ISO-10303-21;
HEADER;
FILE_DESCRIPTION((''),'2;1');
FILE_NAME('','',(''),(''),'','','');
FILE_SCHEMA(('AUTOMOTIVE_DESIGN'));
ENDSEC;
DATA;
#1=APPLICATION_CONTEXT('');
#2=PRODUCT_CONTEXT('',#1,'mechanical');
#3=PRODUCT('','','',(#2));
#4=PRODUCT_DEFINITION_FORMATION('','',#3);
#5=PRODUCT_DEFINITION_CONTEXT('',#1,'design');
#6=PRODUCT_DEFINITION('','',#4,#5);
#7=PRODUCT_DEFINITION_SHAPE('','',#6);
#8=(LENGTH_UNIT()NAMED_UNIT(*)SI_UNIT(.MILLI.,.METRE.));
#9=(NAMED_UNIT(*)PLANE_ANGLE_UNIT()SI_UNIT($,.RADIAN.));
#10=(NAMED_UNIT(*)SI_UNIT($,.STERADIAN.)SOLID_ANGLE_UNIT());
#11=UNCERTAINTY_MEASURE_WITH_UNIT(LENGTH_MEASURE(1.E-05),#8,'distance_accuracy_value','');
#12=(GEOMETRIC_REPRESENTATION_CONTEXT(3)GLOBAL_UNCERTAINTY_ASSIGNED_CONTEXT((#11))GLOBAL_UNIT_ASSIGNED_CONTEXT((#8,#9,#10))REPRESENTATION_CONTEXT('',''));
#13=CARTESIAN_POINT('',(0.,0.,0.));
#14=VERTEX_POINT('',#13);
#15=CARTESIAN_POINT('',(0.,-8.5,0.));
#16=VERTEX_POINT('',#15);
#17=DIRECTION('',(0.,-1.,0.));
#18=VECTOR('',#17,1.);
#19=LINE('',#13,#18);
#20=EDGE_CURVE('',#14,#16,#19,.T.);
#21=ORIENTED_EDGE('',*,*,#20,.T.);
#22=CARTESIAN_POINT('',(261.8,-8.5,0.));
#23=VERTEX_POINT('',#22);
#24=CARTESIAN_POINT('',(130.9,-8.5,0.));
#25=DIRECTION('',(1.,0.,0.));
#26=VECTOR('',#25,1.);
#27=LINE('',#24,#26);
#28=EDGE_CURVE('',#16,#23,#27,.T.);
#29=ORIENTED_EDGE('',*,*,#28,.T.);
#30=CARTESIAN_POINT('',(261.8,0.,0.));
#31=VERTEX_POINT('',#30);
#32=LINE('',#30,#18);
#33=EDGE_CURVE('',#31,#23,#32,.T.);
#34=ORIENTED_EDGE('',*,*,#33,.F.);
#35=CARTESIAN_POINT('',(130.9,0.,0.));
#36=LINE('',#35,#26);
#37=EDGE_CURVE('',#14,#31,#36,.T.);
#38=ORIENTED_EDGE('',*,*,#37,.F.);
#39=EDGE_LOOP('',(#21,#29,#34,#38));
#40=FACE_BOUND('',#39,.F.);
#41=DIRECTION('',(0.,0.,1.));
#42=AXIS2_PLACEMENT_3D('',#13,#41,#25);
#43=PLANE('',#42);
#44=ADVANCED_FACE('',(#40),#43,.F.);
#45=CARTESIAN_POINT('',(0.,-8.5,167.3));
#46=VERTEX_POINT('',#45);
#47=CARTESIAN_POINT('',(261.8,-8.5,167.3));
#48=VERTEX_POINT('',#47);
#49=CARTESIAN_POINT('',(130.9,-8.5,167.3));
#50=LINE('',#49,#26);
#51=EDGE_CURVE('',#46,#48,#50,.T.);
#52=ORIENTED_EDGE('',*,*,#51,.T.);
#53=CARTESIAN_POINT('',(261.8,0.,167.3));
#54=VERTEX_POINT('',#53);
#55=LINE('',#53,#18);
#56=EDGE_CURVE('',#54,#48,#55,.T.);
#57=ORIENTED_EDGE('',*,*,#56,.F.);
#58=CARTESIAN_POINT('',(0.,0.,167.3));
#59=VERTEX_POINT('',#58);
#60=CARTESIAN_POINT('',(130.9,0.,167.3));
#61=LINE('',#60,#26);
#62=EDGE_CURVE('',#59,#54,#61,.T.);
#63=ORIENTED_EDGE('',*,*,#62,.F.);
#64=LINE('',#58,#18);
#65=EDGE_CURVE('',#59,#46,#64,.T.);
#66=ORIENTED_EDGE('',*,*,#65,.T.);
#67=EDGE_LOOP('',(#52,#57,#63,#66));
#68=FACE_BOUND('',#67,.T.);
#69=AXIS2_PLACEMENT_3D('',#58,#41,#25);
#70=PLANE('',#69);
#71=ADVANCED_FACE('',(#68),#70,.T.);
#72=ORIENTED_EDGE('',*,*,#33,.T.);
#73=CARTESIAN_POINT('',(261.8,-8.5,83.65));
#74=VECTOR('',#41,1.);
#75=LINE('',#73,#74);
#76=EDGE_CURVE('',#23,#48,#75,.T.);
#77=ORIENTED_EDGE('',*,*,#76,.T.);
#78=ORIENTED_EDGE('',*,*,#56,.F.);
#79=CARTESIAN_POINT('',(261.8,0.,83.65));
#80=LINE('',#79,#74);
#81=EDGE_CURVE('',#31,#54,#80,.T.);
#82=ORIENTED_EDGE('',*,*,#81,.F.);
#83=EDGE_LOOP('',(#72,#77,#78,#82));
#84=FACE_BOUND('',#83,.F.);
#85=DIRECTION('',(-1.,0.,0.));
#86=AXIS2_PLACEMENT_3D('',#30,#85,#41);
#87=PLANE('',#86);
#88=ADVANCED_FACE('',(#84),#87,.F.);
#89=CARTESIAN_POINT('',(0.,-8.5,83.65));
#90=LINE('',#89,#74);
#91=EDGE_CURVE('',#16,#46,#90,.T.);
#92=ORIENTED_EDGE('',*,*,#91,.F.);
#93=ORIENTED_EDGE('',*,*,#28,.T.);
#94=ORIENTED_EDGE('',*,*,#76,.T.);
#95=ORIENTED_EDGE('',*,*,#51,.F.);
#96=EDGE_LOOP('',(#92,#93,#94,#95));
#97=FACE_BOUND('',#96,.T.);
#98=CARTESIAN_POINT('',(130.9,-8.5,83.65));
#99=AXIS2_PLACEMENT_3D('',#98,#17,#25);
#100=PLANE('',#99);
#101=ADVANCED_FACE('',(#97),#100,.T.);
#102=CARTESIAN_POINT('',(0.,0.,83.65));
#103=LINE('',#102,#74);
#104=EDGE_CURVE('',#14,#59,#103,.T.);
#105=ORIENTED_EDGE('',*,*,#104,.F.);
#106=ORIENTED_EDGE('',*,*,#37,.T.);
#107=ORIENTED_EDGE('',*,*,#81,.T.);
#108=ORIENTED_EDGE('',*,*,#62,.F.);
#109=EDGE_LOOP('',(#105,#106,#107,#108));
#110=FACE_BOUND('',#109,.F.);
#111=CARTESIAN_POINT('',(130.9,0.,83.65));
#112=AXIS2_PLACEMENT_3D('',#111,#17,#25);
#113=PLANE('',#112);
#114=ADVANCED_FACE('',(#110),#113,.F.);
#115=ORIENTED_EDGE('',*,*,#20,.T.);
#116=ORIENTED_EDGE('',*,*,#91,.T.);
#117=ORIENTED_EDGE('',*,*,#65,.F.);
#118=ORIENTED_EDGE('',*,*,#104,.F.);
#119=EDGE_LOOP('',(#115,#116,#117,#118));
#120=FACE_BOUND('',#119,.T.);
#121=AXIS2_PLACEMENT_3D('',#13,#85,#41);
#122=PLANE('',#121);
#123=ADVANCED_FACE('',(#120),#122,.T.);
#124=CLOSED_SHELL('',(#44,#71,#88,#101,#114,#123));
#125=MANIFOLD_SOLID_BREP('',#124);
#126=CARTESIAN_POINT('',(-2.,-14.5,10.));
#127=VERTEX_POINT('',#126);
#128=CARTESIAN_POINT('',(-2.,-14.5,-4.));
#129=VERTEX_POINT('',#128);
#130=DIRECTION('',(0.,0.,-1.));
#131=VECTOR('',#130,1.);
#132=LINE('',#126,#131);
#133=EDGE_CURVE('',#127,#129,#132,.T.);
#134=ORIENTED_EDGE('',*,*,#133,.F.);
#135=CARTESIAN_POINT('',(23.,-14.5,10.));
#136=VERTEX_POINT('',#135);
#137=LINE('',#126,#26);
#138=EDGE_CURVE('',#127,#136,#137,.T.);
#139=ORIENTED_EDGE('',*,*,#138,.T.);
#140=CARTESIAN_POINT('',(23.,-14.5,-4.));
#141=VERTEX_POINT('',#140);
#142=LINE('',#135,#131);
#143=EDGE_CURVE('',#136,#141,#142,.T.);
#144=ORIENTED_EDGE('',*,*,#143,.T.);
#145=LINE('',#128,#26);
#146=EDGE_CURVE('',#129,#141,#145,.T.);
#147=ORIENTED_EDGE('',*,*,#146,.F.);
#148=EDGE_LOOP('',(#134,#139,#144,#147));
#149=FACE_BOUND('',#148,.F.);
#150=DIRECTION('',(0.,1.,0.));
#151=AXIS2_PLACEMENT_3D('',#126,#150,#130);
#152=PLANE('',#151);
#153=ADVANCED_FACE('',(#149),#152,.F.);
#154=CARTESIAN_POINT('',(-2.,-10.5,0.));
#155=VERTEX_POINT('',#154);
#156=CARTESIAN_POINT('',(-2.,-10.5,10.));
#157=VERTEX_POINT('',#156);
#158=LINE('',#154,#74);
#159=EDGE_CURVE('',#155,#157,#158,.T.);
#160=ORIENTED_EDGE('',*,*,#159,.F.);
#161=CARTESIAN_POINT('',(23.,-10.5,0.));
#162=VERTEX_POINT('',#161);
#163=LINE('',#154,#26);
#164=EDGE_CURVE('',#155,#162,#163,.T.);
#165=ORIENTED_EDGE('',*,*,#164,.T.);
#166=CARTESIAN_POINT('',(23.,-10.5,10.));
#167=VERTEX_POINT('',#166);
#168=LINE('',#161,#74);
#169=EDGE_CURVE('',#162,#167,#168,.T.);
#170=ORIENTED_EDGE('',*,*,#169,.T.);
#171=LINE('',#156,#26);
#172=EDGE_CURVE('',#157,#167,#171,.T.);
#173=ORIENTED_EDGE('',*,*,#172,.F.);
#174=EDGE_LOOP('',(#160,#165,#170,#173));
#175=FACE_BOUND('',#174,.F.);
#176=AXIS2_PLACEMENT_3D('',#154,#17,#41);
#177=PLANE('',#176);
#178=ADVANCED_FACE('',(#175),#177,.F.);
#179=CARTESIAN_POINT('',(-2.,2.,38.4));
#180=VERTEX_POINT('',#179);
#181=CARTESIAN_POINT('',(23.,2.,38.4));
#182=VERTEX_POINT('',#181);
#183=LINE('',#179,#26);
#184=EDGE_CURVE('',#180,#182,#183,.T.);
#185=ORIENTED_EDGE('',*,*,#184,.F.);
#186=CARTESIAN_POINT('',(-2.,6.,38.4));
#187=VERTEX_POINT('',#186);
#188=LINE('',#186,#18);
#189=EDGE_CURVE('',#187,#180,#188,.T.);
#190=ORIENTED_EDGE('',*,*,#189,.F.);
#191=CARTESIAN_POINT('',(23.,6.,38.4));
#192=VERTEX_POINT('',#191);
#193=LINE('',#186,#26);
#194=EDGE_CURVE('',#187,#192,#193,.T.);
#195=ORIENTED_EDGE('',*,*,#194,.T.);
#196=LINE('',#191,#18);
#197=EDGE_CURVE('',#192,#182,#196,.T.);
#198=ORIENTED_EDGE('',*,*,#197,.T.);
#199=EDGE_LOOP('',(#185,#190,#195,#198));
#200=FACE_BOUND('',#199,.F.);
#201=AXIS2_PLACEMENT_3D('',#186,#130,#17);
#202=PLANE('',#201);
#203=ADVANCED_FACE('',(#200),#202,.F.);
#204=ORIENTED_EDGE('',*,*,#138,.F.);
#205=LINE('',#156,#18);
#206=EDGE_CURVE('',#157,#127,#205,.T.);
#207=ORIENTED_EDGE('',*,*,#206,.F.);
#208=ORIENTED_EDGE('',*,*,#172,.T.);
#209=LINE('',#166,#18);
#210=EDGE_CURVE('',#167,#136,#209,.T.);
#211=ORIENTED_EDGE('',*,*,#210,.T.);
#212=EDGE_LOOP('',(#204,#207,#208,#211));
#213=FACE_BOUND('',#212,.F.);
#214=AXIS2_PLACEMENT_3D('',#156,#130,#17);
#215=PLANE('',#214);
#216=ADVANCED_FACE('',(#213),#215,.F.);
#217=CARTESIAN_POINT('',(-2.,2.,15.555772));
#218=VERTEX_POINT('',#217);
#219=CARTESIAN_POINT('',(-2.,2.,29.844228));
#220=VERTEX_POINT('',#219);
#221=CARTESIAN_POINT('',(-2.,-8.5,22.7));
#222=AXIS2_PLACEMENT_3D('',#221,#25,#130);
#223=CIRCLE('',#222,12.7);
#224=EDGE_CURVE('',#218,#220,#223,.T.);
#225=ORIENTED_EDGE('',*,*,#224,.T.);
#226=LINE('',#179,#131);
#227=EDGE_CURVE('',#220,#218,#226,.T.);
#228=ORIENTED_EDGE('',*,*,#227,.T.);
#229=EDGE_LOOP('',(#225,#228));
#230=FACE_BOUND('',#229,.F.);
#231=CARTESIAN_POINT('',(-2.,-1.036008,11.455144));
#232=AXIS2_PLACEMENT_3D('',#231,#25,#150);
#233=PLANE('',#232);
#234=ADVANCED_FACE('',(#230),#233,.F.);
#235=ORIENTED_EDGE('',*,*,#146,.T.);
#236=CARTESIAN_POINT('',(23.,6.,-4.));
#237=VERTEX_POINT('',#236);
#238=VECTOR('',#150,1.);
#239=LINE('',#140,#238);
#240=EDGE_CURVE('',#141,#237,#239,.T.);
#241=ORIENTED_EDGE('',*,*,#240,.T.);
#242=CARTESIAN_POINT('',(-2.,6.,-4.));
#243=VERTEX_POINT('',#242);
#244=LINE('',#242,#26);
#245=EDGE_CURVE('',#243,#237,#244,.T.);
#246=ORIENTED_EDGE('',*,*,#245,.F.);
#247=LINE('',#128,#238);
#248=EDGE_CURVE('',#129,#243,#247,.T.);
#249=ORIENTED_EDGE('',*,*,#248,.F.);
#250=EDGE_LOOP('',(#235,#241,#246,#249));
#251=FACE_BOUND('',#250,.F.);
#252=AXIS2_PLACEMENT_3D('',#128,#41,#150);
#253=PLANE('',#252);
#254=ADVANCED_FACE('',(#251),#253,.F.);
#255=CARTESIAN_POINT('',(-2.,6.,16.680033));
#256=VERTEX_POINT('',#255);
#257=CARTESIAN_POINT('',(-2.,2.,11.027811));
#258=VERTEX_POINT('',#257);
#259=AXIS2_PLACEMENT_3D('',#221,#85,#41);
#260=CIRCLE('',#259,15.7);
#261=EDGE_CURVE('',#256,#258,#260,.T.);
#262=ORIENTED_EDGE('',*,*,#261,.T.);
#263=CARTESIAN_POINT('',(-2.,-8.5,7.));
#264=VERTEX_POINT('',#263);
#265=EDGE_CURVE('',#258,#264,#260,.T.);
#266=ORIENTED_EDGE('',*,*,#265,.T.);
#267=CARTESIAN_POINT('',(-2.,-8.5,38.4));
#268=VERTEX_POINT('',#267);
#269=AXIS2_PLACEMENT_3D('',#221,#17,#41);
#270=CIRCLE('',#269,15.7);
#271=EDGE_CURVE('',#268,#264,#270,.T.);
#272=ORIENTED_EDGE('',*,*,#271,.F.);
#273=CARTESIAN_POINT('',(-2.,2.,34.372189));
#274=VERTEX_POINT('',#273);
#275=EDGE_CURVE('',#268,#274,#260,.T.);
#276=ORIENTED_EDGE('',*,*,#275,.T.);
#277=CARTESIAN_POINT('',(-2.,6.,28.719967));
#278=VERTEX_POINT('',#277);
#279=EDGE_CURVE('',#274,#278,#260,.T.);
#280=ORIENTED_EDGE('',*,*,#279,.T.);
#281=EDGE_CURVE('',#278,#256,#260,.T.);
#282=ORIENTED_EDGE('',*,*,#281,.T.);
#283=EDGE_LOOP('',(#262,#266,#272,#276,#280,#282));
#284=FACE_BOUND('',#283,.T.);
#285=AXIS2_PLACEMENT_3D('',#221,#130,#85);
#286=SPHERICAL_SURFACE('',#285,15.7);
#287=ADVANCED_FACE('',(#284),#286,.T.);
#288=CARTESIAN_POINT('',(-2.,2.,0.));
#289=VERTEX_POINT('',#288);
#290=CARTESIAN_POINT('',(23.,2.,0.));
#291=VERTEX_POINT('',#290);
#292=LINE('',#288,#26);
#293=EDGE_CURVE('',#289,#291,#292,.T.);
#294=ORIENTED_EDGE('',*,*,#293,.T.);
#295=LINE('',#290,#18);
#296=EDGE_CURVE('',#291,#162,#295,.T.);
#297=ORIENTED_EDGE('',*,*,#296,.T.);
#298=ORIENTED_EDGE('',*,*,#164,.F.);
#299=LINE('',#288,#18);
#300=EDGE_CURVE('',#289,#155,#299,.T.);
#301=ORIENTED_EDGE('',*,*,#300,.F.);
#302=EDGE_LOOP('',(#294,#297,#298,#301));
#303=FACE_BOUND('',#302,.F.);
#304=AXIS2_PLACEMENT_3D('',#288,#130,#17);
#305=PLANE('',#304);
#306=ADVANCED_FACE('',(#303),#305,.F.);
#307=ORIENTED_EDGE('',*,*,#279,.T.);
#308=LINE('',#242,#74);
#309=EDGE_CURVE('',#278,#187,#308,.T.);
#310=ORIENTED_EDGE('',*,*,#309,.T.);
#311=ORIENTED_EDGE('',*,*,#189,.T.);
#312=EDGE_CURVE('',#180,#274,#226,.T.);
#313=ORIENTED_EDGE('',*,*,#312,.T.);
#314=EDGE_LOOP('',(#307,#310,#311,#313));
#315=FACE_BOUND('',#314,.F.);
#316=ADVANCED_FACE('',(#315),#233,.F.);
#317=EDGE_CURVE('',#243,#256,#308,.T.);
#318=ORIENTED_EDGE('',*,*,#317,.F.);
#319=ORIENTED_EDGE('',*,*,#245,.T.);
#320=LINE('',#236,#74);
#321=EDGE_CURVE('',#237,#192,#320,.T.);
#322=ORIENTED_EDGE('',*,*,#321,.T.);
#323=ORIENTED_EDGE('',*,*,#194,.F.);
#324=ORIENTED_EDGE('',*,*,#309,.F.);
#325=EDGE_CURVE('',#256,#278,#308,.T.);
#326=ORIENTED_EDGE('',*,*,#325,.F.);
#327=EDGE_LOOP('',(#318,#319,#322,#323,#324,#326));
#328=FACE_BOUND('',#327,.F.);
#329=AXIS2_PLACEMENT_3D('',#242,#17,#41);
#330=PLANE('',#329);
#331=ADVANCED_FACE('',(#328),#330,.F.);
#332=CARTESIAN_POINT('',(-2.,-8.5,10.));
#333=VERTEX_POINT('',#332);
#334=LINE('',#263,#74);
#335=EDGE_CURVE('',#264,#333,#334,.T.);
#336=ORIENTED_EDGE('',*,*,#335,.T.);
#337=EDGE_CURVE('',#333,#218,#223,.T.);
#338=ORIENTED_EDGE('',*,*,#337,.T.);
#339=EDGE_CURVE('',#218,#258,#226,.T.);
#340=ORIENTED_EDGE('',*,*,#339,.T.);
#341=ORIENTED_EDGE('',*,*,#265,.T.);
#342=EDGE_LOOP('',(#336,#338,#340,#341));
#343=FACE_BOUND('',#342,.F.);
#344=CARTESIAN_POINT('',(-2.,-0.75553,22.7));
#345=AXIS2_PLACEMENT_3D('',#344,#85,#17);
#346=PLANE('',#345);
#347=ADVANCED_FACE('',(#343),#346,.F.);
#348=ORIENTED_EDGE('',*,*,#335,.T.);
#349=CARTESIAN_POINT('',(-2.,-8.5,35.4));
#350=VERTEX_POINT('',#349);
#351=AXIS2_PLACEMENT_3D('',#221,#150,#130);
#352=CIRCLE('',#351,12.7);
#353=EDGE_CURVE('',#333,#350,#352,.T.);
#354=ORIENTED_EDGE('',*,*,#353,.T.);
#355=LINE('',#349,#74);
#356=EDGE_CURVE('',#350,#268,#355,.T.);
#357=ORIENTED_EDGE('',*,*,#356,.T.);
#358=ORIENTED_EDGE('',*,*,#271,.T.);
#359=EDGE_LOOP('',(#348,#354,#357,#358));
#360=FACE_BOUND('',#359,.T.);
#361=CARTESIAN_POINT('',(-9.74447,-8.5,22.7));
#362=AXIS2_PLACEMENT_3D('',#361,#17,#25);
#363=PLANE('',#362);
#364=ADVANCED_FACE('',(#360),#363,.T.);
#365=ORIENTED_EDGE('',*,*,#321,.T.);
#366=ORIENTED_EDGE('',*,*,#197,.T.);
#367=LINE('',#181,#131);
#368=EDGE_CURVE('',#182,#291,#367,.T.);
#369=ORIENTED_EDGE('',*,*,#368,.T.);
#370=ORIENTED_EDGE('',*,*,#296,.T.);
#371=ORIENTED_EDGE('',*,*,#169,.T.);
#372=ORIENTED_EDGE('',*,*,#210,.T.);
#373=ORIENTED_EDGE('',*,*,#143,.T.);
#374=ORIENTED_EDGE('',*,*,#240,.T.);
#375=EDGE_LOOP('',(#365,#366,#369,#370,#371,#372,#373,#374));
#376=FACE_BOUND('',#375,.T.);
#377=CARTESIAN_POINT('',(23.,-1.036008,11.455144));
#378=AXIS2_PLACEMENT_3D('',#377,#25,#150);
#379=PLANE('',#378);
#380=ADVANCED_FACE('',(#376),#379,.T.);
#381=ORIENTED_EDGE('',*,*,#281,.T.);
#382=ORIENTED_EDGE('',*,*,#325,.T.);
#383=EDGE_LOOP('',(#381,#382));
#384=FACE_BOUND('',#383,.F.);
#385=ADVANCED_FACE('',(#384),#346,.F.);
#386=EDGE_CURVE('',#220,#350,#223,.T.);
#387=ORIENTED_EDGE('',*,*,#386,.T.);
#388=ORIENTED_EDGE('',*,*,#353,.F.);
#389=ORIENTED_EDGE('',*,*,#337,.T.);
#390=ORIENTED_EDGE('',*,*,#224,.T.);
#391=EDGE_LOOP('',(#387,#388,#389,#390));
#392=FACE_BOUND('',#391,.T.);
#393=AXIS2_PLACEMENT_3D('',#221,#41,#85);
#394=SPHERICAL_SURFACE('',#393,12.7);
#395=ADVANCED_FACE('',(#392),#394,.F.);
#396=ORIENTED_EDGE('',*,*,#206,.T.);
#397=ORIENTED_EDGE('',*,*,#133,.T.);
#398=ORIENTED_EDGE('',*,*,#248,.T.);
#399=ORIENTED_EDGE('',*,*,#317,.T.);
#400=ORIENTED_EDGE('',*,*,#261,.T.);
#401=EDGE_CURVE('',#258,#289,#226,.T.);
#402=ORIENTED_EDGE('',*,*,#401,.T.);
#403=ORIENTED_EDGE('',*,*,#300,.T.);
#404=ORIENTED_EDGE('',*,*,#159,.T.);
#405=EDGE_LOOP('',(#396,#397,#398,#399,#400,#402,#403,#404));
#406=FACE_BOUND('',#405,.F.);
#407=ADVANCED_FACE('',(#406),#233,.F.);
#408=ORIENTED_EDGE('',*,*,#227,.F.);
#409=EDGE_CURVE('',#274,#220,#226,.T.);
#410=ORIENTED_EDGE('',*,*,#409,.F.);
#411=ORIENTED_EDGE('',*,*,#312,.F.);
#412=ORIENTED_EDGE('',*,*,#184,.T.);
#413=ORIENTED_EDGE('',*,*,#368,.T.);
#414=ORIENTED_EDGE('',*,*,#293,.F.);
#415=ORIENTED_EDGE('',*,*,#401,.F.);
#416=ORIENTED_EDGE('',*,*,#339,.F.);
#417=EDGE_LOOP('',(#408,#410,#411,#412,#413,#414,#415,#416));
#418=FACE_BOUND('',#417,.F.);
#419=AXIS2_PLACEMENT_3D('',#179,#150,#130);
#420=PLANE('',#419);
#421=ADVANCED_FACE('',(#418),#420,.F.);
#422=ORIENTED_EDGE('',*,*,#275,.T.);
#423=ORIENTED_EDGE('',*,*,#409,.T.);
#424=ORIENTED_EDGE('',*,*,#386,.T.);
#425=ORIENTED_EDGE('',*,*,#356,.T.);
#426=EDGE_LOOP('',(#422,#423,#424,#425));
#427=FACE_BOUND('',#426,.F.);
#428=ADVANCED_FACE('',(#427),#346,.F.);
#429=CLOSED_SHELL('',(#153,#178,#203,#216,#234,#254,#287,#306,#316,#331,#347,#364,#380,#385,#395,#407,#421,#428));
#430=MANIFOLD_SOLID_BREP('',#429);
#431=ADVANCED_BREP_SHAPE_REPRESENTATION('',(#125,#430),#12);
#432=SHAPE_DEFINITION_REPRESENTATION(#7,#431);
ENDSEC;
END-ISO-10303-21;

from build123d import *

# Parameters (mm, degrees)
F0_W     = 261.8
F0_H     = 167.3
F1_DEPTH = 8.5
F3_ANGLE = 90
F5_DEPTH = 25


with BuildPart() as f1:
    # F0 (on Front) → F1 (new body)
    with BuildSketch(Plane.XZ):
        with Locations((130.9, 83.65)):
            Rectangle(F0_W, F0_H)
    extrude(amount=F1_DEPTH)


with BuildPart() as f3:
    # F2 (on face) → F3 (revolve)
    with BuildSketch(Plane.XZ.offset(8.5)):
        with BuildLine():
            Line((-2, 35.4), (-2, 38.4))
            ThreePointArc((-2, 38.4), (-17.7, 22.7), (-2, 7))
            Line((-2, 7), (-2, 10))
            ThreePointArc((-2, 10), (-14.7, 22.7), (-2, 35.4))
        make_face()
    revolve(axis=Axis((-2, -8.5, 29.05), (0, 0, -1)), revolution_arc=F3_ANGLE)

    # F4 (on face) → F5 (join)
    with BuildSketch(Plane.YZ.offset(-2)):
        Polygon((6, 38.4), (2, 38.4), (2, 0), (-10.5, 0), (-10.5, 10), (-14.5, 10), (-14.5, -4), (6, -4), align=None)
    extrude(amount=F5_DEPTH)


solid = Compound([f1.part, f3.part])
